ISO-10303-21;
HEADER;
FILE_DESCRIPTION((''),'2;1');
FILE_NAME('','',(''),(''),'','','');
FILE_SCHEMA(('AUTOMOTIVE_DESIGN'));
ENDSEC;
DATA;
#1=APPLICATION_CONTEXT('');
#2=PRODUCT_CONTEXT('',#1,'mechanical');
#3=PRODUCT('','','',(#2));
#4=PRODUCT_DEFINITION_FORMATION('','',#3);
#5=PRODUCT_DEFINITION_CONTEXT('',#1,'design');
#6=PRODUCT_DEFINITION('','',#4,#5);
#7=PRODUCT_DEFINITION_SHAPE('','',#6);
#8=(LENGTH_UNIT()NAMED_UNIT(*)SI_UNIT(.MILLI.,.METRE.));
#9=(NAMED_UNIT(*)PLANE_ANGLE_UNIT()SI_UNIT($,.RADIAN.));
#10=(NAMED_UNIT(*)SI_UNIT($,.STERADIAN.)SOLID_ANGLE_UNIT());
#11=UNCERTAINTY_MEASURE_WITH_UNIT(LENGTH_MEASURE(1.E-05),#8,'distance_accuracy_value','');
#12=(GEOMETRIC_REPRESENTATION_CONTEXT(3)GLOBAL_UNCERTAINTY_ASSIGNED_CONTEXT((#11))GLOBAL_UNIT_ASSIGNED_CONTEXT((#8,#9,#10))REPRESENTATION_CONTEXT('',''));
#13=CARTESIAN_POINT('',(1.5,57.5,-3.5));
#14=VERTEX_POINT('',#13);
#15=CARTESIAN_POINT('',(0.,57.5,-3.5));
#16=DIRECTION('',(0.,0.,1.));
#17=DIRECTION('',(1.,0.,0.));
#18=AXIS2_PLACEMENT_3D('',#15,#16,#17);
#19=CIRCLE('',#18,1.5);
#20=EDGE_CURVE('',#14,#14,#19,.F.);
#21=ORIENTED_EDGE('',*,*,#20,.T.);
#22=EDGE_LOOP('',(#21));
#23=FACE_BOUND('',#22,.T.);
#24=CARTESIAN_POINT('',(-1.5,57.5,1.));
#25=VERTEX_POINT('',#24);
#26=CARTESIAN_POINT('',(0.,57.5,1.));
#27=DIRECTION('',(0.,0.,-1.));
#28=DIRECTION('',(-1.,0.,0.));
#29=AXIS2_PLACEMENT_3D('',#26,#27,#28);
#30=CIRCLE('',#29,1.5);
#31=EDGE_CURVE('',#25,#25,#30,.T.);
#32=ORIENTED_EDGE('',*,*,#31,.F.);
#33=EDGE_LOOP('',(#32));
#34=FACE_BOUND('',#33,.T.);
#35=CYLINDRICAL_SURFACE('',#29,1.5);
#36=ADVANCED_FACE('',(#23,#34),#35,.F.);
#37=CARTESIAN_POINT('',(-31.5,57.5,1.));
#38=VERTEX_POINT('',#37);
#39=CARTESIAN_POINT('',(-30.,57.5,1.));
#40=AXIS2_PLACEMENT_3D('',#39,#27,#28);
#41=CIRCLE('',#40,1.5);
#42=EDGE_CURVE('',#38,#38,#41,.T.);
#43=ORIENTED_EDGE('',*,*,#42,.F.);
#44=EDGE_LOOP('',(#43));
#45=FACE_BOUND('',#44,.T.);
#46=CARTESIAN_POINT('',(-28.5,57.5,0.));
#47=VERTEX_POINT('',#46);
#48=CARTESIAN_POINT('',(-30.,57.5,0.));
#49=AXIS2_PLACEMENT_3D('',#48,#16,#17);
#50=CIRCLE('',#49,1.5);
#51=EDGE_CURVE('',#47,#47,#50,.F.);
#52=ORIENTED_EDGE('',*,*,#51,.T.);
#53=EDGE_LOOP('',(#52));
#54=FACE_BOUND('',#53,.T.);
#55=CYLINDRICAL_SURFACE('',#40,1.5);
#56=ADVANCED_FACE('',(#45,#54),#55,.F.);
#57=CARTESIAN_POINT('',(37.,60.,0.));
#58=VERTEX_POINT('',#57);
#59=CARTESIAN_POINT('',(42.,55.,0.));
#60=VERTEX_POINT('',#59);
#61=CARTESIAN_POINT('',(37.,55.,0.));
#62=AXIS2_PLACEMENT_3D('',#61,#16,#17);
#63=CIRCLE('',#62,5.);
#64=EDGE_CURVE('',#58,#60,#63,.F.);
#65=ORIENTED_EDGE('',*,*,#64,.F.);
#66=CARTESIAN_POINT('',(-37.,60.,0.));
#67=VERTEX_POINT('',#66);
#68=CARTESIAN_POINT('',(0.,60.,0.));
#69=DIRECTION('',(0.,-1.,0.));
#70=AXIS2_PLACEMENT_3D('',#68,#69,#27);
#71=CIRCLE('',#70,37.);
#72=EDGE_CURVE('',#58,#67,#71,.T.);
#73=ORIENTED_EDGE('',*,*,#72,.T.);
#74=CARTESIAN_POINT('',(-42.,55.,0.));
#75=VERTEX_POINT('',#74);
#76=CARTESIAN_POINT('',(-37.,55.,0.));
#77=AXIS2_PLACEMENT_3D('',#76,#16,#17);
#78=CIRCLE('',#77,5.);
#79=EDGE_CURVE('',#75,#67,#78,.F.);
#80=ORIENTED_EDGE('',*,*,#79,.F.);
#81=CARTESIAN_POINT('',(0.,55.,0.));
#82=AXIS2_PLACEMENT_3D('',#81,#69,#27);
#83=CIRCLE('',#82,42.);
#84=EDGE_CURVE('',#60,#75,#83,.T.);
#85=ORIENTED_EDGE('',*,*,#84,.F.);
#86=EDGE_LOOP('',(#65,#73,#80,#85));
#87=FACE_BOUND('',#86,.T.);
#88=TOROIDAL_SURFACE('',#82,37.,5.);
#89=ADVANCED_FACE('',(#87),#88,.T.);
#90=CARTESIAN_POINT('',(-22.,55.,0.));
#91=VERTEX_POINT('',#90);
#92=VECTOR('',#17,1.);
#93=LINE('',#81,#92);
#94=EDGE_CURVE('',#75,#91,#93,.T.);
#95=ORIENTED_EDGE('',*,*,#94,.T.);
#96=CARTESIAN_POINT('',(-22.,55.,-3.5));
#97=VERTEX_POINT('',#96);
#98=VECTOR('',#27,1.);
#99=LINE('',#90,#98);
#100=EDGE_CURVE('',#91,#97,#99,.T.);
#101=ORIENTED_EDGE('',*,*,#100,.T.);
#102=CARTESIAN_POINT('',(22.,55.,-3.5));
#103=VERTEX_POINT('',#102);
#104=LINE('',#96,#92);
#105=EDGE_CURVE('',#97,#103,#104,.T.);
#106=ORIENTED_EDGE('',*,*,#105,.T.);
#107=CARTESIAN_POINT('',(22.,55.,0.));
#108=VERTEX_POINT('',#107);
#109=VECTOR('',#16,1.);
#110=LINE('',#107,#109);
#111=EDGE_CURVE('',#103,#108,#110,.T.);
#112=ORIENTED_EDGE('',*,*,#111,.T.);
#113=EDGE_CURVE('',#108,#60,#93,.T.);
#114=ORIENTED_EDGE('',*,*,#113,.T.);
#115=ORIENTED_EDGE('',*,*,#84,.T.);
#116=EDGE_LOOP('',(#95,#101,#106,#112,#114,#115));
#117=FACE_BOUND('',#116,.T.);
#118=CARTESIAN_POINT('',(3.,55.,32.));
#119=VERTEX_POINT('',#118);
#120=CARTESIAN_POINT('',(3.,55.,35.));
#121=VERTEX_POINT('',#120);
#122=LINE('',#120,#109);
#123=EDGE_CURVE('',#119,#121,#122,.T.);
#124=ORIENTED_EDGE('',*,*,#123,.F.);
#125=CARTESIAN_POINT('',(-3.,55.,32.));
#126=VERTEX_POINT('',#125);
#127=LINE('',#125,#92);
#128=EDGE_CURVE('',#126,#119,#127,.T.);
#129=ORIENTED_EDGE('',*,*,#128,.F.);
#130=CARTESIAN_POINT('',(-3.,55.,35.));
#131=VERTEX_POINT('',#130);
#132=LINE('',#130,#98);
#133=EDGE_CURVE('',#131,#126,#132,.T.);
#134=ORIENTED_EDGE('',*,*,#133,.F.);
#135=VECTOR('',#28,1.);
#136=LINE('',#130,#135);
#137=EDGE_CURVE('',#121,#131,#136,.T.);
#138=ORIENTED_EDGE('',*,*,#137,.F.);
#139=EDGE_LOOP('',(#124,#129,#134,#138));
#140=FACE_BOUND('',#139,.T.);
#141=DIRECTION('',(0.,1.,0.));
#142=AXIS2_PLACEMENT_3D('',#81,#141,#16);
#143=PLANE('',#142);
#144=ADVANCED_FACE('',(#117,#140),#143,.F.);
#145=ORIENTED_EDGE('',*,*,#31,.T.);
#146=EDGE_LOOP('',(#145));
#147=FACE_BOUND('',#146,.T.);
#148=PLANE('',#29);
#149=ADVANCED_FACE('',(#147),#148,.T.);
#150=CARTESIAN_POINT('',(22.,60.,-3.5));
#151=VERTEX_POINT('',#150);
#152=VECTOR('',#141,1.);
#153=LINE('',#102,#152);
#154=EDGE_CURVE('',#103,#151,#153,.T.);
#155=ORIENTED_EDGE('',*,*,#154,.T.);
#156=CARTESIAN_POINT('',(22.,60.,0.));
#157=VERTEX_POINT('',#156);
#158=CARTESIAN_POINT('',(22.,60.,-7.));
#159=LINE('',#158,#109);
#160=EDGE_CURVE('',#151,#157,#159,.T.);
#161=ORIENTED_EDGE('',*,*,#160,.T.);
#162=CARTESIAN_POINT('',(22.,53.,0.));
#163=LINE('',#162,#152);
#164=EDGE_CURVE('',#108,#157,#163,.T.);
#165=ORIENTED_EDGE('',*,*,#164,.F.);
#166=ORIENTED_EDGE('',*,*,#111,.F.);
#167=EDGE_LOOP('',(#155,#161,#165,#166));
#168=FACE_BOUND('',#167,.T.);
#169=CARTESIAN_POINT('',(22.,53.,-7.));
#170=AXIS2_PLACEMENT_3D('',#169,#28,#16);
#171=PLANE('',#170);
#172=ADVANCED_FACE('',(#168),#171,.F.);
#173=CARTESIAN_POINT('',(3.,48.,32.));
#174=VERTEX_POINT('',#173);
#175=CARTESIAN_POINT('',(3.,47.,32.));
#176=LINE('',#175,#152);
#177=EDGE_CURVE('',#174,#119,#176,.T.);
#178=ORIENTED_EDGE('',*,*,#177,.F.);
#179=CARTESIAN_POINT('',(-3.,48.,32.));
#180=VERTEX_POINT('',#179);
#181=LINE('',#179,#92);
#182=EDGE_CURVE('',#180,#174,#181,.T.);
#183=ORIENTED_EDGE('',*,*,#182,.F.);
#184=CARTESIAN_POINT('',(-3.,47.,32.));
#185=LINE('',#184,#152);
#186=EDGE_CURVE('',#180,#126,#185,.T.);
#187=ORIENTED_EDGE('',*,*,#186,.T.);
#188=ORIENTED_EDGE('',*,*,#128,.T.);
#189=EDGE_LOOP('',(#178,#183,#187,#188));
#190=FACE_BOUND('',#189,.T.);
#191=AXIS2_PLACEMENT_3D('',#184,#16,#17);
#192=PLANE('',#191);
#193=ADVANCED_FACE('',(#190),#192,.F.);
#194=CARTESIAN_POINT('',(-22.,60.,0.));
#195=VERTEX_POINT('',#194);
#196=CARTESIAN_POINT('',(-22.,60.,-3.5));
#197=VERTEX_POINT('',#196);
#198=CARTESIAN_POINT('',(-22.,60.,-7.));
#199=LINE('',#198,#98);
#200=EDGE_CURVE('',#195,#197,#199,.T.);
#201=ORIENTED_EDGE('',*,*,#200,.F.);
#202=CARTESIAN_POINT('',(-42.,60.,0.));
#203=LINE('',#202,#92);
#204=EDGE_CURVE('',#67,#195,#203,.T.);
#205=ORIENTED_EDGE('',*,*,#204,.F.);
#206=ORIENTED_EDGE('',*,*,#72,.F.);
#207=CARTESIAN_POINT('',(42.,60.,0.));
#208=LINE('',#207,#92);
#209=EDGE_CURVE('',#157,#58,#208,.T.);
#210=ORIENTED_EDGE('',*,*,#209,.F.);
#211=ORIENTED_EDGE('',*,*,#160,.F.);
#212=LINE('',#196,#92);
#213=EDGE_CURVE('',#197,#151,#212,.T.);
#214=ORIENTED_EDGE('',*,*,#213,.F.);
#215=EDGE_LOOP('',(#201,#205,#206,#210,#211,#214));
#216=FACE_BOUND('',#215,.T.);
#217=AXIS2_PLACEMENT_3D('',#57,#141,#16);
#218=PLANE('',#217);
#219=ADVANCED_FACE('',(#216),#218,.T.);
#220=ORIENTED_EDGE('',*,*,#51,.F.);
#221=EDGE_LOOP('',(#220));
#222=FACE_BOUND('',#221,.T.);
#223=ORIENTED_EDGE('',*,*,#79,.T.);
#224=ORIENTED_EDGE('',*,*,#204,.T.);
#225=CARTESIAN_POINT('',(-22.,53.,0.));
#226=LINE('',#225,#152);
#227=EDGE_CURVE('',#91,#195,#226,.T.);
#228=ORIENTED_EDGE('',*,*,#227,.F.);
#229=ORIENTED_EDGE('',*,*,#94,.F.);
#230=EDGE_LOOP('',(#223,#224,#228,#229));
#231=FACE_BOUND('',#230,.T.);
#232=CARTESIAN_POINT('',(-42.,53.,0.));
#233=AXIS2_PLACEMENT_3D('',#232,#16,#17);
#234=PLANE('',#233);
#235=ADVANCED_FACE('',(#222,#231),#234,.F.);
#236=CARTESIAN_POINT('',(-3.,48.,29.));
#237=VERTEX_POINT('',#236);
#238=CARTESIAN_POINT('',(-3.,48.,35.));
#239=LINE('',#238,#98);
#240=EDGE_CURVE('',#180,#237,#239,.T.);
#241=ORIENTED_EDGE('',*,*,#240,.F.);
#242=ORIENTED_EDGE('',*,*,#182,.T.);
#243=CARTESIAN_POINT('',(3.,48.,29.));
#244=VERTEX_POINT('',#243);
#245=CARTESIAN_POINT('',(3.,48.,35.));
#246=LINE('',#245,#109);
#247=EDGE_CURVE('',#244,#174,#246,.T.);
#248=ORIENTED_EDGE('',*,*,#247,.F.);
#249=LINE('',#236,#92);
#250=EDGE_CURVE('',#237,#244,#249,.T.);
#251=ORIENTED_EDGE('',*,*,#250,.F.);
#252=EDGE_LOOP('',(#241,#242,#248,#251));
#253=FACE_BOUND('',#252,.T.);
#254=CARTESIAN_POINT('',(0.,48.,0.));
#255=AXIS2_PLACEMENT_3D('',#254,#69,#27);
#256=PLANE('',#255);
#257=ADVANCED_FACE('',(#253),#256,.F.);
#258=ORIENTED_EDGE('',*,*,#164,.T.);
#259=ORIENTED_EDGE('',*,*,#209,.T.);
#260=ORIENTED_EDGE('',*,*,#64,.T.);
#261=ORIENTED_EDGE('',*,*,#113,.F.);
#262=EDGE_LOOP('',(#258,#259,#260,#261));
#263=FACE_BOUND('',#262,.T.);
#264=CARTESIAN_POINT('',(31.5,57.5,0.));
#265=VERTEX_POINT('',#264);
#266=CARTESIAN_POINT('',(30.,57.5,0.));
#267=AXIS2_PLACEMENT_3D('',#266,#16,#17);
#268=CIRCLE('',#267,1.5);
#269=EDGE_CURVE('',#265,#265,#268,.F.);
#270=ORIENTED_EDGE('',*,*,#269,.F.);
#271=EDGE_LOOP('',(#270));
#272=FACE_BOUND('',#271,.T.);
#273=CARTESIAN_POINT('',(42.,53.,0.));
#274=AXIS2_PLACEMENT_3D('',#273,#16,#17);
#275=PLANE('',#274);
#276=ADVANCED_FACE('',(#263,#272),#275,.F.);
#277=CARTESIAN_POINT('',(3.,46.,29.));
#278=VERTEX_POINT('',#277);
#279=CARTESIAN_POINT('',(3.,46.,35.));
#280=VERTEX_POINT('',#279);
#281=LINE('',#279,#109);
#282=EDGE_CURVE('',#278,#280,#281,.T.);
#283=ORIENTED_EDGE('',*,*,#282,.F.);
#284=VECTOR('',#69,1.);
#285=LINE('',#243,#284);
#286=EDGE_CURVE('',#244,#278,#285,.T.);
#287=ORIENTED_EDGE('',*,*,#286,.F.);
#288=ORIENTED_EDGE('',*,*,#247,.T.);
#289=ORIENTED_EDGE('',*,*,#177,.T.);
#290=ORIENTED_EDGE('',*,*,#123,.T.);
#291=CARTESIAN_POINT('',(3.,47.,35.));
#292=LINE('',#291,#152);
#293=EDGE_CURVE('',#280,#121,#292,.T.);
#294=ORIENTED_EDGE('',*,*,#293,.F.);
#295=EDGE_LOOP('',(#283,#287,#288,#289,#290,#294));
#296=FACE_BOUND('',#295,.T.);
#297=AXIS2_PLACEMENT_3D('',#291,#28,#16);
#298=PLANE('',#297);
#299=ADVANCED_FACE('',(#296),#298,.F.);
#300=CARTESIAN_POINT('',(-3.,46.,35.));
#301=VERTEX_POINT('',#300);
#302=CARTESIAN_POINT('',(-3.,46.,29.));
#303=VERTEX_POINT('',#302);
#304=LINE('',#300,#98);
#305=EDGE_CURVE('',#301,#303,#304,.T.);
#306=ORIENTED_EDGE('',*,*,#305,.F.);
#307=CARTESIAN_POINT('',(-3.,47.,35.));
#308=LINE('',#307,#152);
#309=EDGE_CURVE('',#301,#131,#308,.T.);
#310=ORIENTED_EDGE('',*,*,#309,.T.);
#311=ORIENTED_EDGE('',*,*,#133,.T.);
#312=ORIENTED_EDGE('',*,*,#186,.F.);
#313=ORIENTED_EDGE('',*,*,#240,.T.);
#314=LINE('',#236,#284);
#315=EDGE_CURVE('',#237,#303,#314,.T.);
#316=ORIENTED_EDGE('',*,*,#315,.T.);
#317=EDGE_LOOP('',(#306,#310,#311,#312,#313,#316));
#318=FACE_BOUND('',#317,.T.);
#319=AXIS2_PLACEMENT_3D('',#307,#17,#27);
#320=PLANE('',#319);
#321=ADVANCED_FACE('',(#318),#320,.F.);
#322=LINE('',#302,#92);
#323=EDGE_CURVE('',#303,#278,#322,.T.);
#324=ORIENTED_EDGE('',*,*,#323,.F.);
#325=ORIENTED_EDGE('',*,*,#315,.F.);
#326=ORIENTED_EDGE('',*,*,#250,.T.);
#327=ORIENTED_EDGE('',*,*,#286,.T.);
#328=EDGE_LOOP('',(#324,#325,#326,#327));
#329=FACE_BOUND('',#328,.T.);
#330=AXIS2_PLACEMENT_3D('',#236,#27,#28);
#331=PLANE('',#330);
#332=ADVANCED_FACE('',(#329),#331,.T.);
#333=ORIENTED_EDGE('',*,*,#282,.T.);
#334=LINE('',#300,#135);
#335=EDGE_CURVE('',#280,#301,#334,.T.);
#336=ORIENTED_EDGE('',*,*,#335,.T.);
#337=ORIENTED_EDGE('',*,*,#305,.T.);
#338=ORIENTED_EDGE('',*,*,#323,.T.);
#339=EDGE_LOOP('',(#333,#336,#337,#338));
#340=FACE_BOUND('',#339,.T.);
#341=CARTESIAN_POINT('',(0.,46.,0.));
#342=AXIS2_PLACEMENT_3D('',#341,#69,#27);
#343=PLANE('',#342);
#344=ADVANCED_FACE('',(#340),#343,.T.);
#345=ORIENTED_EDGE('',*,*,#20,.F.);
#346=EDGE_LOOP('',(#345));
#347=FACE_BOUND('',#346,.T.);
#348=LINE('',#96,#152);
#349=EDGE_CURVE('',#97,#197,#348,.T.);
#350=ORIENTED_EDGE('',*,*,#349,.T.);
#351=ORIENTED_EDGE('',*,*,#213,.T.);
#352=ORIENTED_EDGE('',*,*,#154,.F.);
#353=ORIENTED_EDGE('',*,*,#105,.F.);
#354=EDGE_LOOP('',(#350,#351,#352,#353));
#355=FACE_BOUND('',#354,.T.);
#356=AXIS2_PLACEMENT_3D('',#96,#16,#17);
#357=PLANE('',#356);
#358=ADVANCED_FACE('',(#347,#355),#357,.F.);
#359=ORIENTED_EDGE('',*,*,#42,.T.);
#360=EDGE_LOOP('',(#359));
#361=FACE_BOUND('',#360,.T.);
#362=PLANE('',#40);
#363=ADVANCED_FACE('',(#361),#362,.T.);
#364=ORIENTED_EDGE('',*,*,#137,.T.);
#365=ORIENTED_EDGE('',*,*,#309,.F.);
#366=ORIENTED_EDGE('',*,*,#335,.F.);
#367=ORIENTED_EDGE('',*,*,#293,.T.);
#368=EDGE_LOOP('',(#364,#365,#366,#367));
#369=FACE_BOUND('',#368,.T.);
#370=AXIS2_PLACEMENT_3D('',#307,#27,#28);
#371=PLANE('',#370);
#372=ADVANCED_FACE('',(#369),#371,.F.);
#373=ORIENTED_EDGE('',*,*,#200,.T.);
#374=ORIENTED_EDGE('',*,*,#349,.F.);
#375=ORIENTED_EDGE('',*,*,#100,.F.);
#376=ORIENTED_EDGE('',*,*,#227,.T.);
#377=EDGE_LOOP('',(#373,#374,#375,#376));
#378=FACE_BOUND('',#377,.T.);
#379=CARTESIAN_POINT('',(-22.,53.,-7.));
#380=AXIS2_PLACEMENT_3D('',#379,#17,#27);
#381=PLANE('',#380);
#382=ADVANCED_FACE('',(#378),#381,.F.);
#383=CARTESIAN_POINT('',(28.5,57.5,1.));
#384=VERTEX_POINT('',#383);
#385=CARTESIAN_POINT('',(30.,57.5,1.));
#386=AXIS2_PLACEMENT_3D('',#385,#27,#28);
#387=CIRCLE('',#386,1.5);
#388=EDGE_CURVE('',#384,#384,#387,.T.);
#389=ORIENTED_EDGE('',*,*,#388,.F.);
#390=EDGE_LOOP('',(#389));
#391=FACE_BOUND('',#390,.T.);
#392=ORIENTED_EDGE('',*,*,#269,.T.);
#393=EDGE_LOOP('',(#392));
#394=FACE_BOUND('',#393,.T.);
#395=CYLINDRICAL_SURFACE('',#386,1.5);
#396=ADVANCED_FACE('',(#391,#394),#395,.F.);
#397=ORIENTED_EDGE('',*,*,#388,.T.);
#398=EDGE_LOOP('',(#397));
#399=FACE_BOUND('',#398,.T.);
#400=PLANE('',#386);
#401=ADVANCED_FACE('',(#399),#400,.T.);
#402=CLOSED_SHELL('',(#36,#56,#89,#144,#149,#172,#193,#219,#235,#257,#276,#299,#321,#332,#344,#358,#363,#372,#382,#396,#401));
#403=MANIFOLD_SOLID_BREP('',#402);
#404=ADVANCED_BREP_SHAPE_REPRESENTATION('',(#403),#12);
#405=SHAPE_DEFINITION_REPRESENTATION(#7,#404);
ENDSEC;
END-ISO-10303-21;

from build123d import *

# Parameters (mm, degrees)
CUT_EXTRUDE1_DEPTH       = 5
CUT_EXTRUDE3_DEPTH       = 45
SKETCH8_R                = 40
CUT_EXTRUDE4_DEPTH       = 32
SKETCH9_R                = 32
SKETCH9_R_2              = 24.5
CUT_EXTRUDE5_DEPTH       = 14
SKETCH10_R               = 26
CUT_EXTRUDE6_DEPTH       = 14
FILLET1_R                = 7
FILLET2_R                = 7
CUT_REVOLVE1_START       = 22
CUT_REVOLVE1_DEPTH       = 30.5
CUT_EXTRUDE12_DEPTH      = 5
SKETCH18_W               = 13
SKETCH18_H               = 8
CUT_EXTRUDE13_DEPTH      = 5
INTERSECT1_OUTLINE_R     = 42
INTERSECT1_DEPTH         = 55
SKETCH20_W               = 6
SKETCH20_H               = 3
BOSS_EXTRUDE1_DEPTH      = 8
BOSS_EXTRUDE2_DEPTH      = 1
BOSS_EXTRUDE2_DEPTH_BACK = 1
SKETCH21_W               = 6
SKETCH21_H               = 6
BOSS_EXTRUDE3_DEPTH      = 7
SKETCH19_R               = 1.5
CUT_EXTRUDE14_DEPTH      = 8
SKETCH23_W               = 20
SKETCH23_H               = 7
CUT_EXTRUDE15_DEPTH      = 7
SKETCH24_W               = 44
SKETCH24_H               = 3.5
CUT_EXTRUDE16_DEPTH      = 5


# Read off the part's stored shape, not the designer's step: Cut-Revolve1, Intersect1
with BuildPart() as part:
    # Sketch1 → Revolve1 (revolve)
    with BuildSketch(Plane.XY, mode=Mode.PRIVATE) as revolve1_sk:
        with BuildLine():
            Line((22.5, 0), (32, 0))
            ThreePointArc((32, 0), (33.414213562, 0.585786438), (34, 2))
            Line((34, 2), (34, 18))
            Line((34, 18), (40, 18))
            ThreePointArc((40, 18), (41.414213562, 18.585786438), (42, 20))
            Line((42, 20), (42, 55))
            ThreePointArc((42, 55), (40.535533906, 58.535533906), (37, 60))
            Line((37, 60), (0, 60))
            Line((0, 60), (0, 18))
            Line((0, 18), (22.5, 18))
            Line((22.5, 18), (22.5, 0))
        make_face()
    revolve(revolve1_sk.sketch.rotate(Axis((0, 2, 0), (0, 1, 0)), 90), axis=Axis((0, 2, 0), (0, 1, 0)))

    # Sketch5 → Cut-Extrude1 (cut)
    with BuildSketch(Plane(origin=(0, 60, 0), x_dir=(1, 0, 0), z_dir=(0, 1, 0))):
        with BuildLine():
            Line((-42, 0), (-40, 0))
            Line((-40, 0), (40, 0))
            Line((40, 0), (42, 0))
            ThreePointArc((42, 0), (0, 42), (-42, 0))
        make_face()
    extrude(amount=-CUT_EXTRUDE1_DEPTH, mode=Mode.SUBTRACT)

    # Sketch7 → Cut-Extrude3 (cut)
    with BuildSketch(Plane.XZ.offset(-18)):
        with BuildLine():
            Line((-21, 0), (21, 0))
            ThreePointArc((21, 0), (0, -21), (-21, 0))
        make_face()
    extrude(amount=-CUT_EXTRUDE3_DEPTH, mode=Mode.SUBTRACT)

    # Sketch8 → Cut-Extrude4 (cut)
    with BuildSketch(Plane(origin=(0, 52.5, 0), x_dir=(1, 0, 0), z_dir=(0, 1, 0))):
        with Locations(Location((0, 0, 0), (0, 0, 270))):
            Circle(SKETCH8_R)
        with BuildLine():
            Line((22.912878475, -2), (-22.912878475, -2))
            ThreePointArc((-22.912878475, -2), (0, 23), (22.912878475, -2))
        make_face(mode=Mode.SUBTRACT)
    extrude(amount=-CUT_EXTRUDE4_DEPTH, mode=Mode.SUBTRACT)

    # Sketch9 → Cut-Extrude5 (cut)
    with BuildSketch(Plane(origin=(0, 2, 0), x_dir=(-1, 0, 0), z_dir=(0, -1, 0))):
        with Locations(Location((0, 0, 0), (0, 0, 90))):
            Circle(SKETCH9_R)
        with Locations(Location((0, 0, 0), (0, 0, 90))):
            Circle(SKETCH9_R_2, mode=Mode.SUBTRACT)
    extrude(amount=-CUT_EXTRUDE5_DEPTH, mode=Mode.SUBTRACT)

    # Sketch10 → Cut-Extrude6 (cut)
    with BuildSketch(Plane(origin=(0, 2, 0), x_dir=(-1, 0, 0), z_dir=(0, -1, 0))):
        Circle(SKETCH10_R)
    extrude(amount=-CUT_EXTRUDE6_DEPTH, mode=Mode.SUBTRACT)

    # Fillet1
    fillet1_edges = [part.edges().sort_by_distance(p)[0] for p in [
        (21, 36.5, 0),
        (-21, 36.5, 0),
    ]]
    fillet(fillet1_edges, radius=FILLET1_R)

    # Fillet2
    fillet2_edges = [part.edges().sort_by_distance(p)[0] for p in [
        (-22.912878475, 36.5, 2),
        (22.912878475, 36.5, 2),
    ]]
    fillet(fillet2_edges, radius=FILLET2_R)

    # Cut-Revolve1 outline → Cut-Revolve1 (cut)
    with BuildSketch(Plane(origin=(0, 0, 0), x_dir=(1, 0, 0), z_dir=(0, 1, 0)).offset(CUT_REVOLVE1_START)):
        with BuildLine():
            Line((-34.641016151, -20), (-36.373066959, -21))
            ThreePointArc((-36.373066959, -21), (0, -42), (36.373066959, -21))
            Line((36.373066959, -21), (34.641016151, -20))
            ThreePointArc((34.641016151, -20), (0, -40), (-34.641016151, -20))
        make_face()
    extrude(amount=CUT_REVOLVE1_DEPTH, mode=Mode.SUBTRACT)

    # Sketch15 → Cut-Extrude12 (cut)
    with BuildSketch(Plane(origin=(0, 20.5, 0), x_dir=(1, 0, 0), z_dir=(0, 1, 0))):
        with BuildLine():
            Line((-28.124355653, -3.514579578), (-26.124355653, -3.514579578))
            ThreePointArc((-26.124355653, -3.514579578), (-24.710142091, -2.928793141), (-24.124355653, -1.514579578))
            Line((-24.124355653, -1.514579578), (-24.124355653, 8.485420422))
            ThreePointArc((-24.124355653, 8.485420422), (-24.710142091, 9.899633984), (-26.124355653, 10.485420422))
            Line((-26.124355653, 10.485420422), (-28.124355653, 10.485420422))
            ThreePointArc((-28.124355653, 10.485420422), (-29.538569215, 9.899633984), (-30.124355653, 8.485420422))
            Line((-30.124355653, 8.485420422), (-30.124355653, -1.514579578))
            ThreePointArc((-30.124355653, -1.514579578), (-29.538569215, -2.928793141), (-28.124355653, -3.514579578))
        make_face()
    extrude(amount=-CUT_EXTRUDE12_DEPTH, mode=Mode.SUBTRACT)

    # Sketch18 → Cut-Extrude13 (cut)
    with BuildSketch(Plane(origin=(0, 55, 0), x_dir=(1, 0, 0), z_dir=(0, 1, 0))):
        with Locations((0.796512215, 32.951769165)):
            Rectangle(SKETCH18_W, SKETCH18_H)
    extrude(amount=-CUT_EXTRUDE13_DEPTH, mode=Mode.SUBTRACT)

    # Intersect1 outline → Intersect1 (cut)
    with BuildSketch(Plane(origin=(0, 0, 0), x_dir=(1, 0, 0), z_dir=(0, 1, 0))):
        Circle(INTERSECT1_OUTLINE_R)
        with BuildLine():
            Line((12.124355653, 0), (-12.124355653, 0))
            ThreePointArc((-12.124355653, 0), (-18.186533479, 3.5), (-18.186533479, 10.5))
            ThreePointArc((-18.186533479, 10.5), (0, 21), (18.186533479, 10.5))
            ThreePointArc((18.186533479, 10.5), (18.186533479, 3.5), (12.124355653, 0))
        make_face(mode=Mode.SUBTRACT)
    extrude(amount=INTERSECT1_DEPTH, mode=Mode.SUBTRACT)

    # Sketch20 → Boss-Extrude1 (add)
    with BuildSketch(Plane.XZ.offset(-55)):
        with Locations((0, 33.5)):
            Rectangle(SKETCH20_W, SKETCH20_H)
    extrude(amount=BOSS_EXTRUDE1_DEPTH)

    # Sketch21 → Boss-Extrude2 (add, two sides: drawn at the far end of the back side and taken through both)
    with BuildSketch(Plane.XZ.offset(-47).offset(-BOSS_EXTRUDE2_DEPTH_BACK)):
        with Locations((0, 32)):
            Rectangle(SKETCH21_W, SKETCH21_H)
    extrude(amount=BOSS_EXTRUDE2_DEPTH + BOSS_EXTRUDE2_DEPTH_BACK)

    # Sketch22 → Boss-Extrude3 (add)
    with BuildSketch(Plane(origin=(0, 0, 0), x_dir=(-1, 0, 0), z_dir=(0, 0, -1))):
        with BuildLine():
            Line((-42, 55), (42, 55))
            ThreePointArc((42, 55), (40.535533906, 58.535533906), (37, 60))
            Line((37, 60), (-37, 60))
            ThreePointArc((-37, 60), (-40.535533906, 58.535533906), (-42, 55))
        make_face()
    extrude(amount=BOSS_EXTRUDE3_DEPTH)

    # Sketch19 → Cut-Extrude14 (cut)
    with BuildSketch(Plane(origin=(0, 0, -7), x_dir=(-1, 0, 0), z_dir=(0, 0, -1))):
        with Locations((0, 57.5)):
            Circle(SKETCH19_R)
        with Locations((-30, 57.5)):
            Circle(SKETCH19_R)
        with Locations((30, 57.5)):
            Circle(SKETCH19_R)
    extrude(amount=-CUT_EXTRUDE14_DEPTH, mode=Mode.SUBTRACT)

    # Sketch23 → Cut-Extrude15 (cut)
    with BuildSketch(Plane(origin=(0, 60, 0), x_dir=(1, 0, 0), z_dir=(0, 1, 0))):
        with Locations((-32, 3.5)):
            Rectangle(SKETCH23_W, SKETCH23_H)
        with Locations((32, 3.5)):
            Rectangle(SKETCH23_W, SKETCH23_H)
    extrude(amount=-CUT_EXTRUDE15_DEPTH, mode=Mode.SUBTRACT)

    # Sketch24 → Cut-Extrude16 (cut)
    with BuildSketch(Plane(origin=(0, 60, 0), x_dir=(1, 0, 0), z_dir=(0, 1, 0))):
        with Locations((0, 5.25)):
            Rectangle(SKETCH24_W, SKETCH24_H)
    extrude(amount=-CUT_EXTRUDE16_DEPTH, mode=Mode.SUBTRACT)


solid = part.part
